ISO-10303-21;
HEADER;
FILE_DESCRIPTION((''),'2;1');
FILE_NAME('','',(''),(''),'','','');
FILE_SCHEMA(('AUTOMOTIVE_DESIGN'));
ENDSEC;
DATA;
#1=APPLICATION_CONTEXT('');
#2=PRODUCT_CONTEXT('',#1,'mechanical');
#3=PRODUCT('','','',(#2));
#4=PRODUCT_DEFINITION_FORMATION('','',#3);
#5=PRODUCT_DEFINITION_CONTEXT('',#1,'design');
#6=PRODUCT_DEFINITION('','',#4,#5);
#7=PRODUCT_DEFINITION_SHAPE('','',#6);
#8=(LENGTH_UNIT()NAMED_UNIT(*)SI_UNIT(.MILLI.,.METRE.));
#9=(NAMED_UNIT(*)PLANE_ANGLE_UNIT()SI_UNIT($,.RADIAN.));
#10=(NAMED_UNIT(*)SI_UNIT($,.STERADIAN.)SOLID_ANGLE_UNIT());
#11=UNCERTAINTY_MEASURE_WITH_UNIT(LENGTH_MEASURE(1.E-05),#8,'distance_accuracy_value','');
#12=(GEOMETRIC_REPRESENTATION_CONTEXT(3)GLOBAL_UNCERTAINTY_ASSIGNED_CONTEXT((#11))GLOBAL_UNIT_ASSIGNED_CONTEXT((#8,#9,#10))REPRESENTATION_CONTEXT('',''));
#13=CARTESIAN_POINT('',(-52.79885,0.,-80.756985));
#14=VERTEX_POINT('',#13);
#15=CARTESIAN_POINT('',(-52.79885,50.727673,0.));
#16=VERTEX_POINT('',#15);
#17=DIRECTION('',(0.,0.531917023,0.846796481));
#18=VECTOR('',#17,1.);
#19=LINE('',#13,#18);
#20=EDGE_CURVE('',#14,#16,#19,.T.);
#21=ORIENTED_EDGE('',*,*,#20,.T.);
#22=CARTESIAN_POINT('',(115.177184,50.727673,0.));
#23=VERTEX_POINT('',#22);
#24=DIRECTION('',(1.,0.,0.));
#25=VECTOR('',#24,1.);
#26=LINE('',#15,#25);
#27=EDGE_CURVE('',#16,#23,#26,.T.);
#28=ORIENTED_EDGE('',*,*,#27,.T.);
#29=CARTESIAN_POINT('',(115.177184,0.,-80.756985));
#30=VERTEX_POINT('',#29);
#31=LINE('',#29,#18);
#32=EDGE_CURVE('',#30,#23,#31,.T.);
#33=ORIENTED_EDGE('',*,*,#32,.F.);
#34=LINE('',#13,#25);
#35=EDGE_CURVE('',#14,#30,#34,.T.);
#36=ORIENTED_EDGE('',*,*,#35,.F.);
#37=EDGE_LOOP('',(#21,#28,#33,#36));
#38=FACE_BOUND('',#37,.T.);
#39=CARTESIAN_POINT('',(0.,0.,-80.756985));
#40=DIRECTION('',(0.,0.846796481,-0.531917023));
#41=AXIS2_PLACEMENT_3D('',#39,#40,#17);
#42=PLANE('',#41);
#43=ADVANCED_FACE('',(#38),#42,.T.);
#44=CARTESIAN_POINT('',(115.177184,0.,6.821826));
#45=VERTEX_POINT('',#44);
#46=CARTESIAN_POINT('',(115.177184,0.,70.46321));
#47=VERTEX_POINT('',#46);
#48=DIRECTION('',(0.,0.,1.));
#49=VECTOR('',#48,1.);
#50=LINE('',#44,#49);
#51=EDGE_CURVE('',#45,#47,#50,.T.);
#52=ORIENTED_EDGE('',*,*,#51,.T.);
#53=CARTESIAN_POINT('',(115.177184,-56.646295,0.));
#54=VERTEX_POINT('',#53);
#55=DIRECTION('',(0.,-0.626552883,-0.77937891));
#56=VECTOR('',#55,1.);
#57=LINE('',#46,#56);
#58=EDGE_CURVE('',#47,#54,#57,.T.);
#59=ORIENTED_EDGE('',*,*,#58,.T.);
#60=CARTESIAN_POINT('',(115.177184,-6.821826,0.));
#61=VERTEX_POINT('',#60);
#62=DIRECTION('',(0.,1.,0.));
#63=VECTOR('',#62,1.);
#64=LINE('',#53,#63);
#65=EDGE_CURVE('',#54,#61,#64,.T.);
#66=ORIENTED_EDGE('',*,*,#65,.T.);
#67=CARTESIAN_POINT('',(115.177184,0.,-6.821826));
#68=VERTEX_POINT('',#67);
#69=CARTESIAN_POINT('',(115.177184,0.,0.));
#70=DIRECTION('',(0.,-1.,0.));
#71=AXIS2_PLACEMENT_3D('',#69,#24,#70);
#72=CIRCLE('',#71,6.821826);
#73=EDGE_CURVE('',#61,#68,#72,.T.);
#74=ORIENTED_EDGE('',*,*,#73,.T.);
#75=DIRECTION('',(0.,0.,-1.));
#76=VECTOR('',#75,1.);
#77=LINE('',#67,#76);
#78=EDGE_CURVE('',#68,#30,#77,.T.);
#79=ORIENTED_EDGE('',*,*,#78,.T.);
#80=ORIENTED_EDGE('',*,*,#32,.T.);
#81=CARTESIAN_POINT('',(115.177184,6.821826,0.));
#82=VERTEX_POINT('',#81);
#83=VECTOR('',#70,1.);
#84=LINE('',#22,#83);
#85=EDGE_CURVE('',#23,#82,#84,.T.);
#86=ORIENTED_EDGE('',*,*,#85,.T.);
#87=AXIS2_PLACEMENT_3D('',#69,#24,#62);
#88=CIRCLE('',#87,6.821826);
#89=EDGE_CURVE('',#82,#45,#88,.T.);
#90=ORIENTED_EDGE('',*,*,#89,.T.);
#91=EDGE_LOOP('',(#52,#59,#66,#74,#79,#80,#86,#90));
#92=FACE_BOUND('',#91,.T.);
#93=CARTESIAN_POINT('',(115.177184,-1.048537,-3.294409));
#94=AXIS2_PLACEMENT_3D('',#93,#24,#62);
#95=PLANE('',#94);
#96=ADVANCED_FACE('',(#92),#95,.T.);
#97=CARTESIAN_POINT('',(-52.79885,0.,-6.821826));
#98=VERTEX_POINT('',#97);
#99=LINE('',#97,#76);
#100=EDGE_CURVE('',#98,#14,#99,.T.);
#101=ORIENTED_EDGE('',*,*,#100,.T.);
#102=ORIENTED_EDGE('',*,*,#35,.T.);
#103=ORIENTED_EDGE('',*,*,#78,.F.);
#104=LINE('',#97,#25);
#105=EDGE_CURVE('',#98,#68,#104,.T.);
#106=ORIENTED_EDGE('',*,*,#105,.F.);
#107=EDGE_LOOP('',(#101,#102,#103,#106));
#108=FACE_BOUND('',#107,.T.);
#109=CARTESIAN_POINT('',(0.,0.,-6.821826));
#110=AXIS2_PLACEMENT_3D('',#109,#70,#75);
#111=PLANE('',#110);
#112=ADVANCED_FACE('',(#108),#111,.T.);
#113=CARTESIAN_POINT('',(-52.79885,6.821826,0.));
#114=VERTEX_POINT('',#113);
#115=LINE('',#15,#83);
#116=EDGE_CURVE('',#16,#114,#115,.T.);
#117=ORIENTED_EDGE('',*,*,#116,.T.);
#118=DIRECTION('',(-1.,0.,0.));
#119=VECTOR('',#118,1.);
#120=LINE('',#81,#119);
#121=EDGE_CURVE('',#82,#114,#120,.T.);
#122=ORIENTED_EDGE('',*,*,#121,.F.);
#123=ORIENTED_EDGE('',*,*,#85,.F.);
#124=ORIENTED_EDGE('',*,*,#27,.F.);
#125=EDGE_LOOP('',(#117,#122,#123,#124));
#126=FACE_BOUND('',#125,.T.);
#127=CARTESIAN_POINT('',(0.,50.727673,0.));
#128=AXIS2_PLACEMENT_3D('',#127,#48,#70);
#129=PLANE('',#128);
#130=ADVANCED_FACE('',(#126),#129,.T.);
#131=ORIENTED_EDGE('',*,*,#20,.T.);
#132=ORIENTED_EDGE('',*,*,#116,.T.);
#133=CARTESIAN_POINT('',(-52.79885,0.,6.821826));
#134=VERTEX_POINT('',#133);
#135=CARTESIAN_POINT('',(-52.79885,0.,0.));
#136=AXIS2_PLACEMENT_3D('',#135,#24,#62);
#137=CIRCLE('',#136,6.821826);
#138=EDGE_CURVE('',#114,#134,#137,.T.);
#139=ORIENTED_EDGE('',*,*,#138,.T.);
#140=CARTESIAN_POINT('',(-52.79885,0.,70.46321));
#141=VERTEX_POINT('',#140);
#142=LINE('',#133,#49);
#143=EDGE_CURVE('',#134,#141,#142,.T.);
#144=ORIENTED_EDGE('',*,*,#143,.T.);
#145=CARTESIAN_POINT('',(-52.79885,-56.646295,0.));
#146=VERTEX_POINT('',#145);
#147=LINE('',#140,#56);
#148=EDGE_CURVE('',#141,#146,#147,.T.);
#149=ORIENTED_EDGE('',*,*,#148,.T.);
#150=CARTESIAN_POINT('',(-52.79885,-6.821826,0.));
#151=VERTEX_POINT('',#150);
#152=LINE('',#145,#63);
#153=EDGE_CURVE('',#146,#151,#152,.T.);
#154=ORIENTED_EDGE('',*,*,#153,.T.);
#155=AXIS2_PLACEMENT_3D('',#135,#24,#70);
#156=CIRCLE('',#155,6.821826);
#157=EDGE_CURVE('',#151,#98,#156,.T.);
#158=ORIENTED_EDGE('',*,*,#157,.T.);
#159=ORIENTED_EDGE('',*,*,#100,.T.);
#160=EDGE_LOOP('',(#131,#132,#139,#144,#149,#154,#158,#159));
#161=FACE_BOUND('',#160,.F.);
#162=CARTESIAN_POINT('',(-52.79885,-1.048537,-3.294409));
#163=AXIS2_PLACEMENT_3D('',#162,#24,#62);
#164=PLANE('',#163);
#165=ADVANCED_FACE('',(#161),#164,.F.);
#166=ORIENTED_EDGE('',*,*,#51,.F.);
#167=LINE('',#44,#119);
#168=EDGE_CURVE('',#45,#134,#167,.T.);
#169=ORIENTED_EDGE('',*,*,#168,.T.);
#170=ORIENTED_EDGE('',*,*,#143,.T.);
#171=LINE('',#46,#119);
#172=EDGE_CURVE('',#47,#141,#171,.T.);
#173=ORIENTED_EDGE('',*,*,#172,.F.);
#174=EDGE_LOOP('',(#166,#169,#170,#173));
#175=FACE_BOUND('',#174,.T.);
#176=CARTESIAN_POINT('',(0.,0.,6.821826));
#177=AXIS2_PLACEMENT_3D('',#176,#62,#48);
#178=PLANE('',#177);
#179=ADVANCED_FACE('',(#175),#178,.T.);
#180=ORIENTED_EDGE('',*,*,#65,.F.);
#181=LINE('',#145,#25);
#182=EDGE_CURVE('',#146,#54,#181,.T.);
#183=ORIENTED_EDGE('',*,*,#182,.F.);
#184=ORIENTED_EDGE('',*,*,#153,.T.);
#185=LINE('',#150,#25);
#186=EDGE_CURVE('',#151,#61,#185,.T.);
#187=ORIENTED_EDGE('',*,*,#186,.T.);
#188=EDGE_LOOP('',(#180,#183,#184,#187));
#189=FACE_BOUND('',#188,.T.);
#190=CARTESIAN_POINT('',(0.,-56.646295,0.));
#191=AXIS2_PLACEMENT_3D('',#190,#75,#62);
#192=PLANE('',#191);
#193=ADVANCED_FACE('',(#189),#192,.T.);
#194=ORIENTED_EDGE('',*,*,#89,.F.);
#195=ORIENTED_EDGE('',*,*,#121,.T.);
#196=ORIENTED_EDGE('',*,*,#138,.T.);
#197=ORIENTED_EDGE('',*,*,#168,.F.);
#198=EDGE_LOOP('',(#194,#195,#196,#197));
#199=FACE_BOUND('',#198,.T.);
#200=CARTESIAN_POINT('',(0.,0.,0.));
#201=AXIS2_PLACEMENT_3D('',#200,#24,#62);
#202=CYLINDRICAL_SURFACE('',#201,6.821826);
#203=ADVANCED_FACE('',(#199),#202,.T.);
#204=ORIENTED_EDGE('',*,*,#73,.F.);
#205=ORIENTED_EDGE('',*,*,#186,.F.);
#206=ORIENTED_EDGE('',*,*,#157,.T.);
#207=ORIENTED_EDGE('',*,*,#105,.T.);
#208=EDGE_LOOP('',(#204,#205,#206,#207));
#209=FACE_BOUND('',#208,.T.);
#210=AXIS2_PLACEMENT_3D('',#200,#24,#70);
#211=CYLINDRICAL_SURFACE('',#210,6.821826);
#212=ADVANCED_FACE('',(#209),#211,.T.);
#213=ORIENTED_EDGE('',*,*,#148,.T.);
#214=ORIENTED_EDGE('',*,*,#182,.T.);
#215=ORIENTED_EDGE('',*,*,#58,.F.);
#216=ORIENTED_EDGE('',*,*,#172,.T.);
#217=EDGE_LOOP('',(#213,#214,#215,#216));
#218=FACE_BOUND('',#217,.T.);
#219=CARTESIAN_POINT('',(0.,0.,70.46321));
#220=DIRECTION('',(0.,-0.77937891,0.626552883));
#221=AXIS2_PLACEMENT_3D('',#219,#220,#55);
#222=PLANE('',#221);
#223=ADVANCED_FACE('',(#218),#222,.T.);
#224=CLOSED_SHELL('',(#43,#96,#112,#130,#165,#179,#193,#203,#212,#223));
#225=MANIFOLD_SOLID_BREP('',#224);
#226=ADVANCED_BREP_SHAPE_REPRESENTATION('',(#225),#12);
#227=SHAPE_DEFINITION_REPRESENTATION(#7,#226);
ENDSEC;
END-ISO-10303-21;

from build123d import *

# Parameters (mm, degrees)
F2_DEPTH      = 115.1771843433
F2_DEPTH_BACK = 52.7988504618


# Not quite as in the source:
# - the program builds the solid bodies; features that only make, move or delete a surface that nothing else refers to are left out


with BuildPart() as f2:
    # F0 (on Right) → F2 (new body, two sides)
    with BuildSketch(Plane.YZ) as f2_sk:
        with BuildLine():
            Line((0, 70.4632103443), (-56.6462948918, 0))
            Line((-56.6462948918, 0), (-6.8218263729, 0))
            ThreePointArc((-6.8218263729, 0), (-4.8237596884, -4.8237596884), (0, -6.8218263729))
            Line((0, -6.8218263729), (0, -80.7569846511))
            Line((0, -80.7569846511), (50.7276728749, 0))
            Line((50.7276728749, 0), (6.8218263729, 0))
            ThreePointArc((6.8218263729, 0), (4.8237596884, 4.8237596884), (0, 6.8218263729))
            Line((0, 6.8218263729), (0, 16.5492296219))
            Line((0, 16.5492296219), (0, 70.4632103443))
        make_face()
    extrude(amount=F2_DEPTH)
    extrude(f2_sk.sketch, amount=-F2_DEPTH_BACK)


solid = f2.part
